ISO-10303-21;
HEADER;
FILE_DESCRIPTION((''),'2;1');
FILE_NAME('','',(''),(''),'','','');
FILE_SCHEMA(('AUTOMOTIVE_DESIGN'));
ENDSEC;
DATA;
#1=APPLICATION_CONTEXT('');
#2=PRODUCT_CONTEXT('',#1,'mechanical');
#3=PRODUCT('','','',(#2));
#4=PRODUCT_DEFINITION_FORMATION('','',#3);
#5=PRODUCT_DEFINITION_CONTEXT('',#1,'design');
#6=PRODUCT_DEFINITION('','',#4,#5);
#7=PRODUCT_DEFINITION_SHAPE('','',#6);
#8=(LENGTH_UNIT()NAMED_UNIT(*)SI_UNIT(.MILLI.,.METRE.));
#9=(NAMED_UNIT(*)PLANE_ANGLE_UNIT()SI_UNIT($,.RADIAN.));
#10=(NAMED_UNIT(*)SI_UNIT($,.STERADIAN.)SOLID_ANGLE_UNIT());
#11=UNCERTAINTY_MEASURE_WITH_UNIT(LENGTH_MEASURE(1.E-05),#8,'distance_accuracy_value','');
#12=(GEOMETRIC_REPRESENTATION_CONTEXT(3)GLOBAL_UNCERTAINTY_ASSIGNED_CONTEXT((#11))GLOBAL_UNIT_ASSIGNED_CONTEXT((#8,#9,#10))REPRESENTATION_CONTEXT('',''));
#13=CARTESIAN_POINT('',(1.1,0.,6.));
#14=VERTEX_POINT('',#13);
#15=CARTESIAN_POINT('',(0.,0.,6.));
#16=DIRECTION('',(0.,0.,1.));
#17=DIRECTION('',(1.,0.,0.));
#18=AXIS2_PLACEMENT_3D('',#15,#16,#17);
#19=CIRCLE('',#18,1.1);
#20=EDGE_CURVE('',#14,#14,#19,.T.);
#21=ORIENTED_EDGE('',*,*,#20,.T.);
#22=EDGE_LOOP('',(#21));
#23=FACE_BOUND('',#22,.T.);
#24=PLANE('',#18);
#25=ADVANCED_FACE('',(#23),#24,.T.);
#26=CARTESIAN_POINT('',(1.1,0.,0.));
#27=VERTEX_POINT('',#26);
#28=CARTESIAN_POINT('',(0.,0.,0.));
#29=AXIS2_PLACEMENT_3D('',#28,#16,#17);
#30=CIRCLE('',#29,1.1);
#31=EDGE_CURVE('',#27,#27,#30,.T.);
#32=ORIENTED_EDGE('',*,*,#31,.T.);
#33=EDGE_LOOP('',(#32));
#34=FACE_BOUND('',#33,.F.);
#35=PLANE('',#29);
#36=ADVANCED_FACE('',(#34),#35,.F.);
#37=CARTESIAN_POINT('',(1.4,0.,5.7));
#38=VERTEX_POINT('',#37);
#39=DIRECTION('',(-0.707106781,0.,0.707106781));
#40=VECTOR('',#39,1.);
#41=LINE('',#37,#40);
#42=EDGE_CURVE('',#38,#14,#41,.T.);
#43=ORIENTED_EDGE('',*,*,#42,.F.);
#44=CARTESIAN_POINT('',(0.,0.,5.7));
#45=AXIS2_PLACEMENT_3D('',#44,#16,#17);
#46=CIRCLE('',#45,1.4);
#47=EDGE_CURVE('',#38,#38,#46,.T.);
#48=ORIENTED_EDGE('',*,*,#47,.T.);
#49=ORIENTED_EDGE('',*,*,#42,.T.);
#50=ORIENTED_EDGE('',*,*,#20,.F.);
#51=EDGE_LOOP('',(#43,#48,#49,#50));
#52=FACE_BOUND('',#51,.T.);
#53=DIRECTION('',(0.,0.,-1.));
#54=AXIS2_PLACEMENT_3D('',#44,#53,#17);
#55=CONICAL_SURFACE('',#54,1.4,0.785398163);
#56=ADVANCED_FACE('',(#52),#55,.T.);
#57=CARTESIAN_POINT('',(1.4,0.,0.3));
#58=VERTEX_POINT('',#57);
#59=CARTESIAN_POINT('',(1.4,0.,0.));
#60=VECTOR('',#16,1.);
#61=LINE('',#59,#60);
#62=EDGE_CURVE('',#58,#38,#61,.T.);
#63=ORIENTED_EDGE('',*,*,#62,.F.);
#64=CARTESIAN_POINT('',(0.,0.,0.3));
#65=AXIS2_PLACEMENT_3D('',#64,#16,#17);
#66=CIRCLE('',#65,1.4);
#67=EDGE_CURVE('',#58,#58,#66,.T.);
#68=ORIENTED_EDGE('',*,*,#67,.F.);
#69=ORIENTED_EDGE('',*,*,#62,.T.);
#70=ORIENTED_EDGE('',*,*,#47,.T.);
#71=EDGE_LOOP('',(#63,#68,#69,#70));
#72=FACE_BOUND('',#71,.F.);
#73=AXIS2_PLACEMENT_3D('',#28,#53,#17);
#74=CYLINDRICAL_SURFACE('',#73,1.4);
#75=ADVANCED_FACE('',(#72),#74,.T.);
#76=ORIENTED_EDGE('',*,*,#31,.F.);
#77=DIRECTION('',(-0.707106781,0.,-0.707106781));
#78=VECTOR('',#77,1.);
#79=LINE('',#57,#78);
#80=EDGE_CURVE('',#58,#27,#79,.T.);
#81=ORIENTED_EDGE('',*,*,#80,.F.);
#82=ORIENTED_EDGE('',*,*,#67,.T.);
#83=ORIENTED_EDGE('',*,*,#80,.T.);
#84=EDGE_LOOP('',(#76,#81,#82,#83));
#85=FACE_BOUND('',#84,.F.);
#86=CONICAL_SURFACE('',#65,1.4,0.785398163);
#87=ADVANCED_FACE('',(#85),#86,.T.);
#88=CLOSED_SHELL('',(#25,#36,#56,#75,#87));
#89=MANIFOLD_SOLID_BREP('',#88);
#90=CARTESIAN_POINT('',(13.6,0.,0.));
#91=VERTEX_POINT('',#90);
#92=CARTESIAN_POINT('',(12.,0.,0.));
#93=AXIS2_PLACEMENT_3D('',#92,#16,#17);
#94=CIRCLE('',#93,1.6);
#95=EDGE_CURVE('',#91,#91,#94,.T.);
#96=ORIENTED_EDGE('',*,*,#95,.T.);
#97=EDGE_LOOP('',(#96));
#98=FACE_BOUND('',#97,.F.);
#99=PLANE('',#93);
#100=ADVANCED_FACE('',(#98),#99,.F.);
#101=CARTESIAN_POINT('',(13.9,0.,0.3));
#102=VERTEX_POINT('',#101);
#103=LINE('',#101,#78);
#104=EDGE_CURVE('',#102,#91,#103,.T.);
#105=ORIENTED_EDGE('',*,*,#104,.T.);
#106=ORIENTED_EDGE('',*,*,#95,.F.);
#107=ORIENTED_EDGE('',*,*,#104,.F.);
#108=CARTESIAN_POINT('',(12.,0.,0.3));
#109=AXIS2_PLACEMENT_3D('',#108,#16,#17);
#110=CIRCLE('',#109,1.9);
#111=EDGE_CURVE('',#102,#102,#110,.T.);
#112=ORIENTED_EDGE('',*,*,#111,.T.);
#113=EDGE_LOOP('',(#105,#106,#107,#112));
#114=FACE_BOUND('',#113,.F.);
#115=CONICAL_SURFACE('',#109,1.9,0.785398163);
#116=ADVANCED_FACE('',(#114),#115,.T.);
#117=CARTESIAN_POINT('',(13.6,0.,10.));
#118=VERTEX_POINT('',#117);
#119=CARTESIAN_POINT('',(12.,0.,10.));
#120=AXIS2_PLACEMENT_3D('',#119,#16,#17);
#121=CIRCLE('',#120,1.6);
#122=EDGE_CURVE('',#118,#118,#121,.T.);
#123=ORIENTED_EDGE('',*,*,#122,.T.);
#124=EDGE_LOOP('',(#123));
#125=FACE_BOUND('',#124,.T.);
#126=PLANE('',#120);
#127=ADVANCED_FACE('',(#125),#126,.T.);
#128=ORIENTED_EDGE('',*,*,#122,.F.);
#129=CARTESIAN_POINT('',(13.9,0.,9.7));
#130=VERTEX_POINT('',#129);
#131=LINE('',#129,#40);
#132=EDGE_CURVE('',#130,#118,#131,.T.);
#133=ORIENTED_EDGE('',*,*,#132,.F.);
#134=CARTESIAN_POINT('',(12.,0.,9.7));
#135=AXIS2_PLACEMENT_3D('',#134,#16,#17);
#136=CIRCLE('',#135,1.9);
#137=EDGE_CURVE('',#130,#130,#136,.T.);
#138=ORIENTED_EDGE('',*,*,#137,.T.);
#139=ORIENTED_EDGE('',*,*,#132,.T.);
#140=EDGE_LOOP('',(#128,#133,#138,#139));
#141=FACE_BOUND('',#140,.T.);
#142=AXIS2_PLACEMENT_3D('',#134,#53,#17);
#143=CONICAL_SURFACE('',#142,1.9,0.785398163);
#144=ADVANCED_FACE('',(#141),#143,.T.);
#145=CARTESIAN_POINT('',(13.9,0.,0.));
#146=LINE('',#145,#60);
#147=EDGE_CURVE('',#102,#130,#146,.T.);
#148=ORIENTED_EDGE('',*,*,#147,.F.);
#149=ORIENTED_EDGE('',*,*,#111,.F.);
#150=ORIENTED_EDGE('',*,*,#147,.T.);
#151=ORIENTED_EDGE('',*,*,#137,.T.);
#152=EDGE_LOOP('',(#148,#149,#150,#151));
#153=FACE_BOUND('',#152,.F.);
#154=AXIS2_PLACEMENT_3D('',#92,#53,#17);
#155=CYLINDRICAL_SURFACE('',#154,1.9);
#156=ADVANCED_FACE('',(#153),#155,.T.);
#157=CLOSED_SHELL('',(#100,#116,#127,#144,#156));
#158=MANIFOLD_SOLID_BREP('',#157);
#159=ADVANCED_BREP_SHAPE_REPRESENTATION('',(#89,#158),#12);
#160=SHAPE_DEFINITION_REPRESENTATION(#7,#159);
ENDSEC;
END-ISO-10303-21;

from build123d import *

# Parameters (mm, degrees)
F0_R      = 1.9
F1_DEPTH  = 10
F0_R_2    = 1.4
F2_DEPTH  = 6
F3_SIZE   = 0.3
F3_2_SIZE = 0.3


with BuildPart() as f1:
    # F0 (on Top) → F1 (new body)
    with BuildSketch(Plane.XY):
        with Locations((12, 0)):
            Circle(F0_R)
    extrude(amount=F1_DEPTH)

    # F3
    f3_edges = [f1.edges().sort_by_distance(p)[0] for p in [
        (10.1, 0, 10),
        (10.1, 0, 0),
    ]]
    chamfer(f3_edges, length=F3_SIZE)


with BuildPart() as f2:
    # F0 (on Top) → F2 (new body)
    with BuildSketch(Plane.XY):
        Circle(F0_R_2)
    extrude(amount=F2_DEPTH)

    # F3#2
    f3_2_edges = [f2.edges().sort_by_distance(p)[0] for p in [
        (-1.4, 0, 6),
        (-1.4, 0, 0),
    ]]
    chamfer(f3_2_edges, length=F3_2_SIZE)


solid = Compound([f1.part, f2.part])
